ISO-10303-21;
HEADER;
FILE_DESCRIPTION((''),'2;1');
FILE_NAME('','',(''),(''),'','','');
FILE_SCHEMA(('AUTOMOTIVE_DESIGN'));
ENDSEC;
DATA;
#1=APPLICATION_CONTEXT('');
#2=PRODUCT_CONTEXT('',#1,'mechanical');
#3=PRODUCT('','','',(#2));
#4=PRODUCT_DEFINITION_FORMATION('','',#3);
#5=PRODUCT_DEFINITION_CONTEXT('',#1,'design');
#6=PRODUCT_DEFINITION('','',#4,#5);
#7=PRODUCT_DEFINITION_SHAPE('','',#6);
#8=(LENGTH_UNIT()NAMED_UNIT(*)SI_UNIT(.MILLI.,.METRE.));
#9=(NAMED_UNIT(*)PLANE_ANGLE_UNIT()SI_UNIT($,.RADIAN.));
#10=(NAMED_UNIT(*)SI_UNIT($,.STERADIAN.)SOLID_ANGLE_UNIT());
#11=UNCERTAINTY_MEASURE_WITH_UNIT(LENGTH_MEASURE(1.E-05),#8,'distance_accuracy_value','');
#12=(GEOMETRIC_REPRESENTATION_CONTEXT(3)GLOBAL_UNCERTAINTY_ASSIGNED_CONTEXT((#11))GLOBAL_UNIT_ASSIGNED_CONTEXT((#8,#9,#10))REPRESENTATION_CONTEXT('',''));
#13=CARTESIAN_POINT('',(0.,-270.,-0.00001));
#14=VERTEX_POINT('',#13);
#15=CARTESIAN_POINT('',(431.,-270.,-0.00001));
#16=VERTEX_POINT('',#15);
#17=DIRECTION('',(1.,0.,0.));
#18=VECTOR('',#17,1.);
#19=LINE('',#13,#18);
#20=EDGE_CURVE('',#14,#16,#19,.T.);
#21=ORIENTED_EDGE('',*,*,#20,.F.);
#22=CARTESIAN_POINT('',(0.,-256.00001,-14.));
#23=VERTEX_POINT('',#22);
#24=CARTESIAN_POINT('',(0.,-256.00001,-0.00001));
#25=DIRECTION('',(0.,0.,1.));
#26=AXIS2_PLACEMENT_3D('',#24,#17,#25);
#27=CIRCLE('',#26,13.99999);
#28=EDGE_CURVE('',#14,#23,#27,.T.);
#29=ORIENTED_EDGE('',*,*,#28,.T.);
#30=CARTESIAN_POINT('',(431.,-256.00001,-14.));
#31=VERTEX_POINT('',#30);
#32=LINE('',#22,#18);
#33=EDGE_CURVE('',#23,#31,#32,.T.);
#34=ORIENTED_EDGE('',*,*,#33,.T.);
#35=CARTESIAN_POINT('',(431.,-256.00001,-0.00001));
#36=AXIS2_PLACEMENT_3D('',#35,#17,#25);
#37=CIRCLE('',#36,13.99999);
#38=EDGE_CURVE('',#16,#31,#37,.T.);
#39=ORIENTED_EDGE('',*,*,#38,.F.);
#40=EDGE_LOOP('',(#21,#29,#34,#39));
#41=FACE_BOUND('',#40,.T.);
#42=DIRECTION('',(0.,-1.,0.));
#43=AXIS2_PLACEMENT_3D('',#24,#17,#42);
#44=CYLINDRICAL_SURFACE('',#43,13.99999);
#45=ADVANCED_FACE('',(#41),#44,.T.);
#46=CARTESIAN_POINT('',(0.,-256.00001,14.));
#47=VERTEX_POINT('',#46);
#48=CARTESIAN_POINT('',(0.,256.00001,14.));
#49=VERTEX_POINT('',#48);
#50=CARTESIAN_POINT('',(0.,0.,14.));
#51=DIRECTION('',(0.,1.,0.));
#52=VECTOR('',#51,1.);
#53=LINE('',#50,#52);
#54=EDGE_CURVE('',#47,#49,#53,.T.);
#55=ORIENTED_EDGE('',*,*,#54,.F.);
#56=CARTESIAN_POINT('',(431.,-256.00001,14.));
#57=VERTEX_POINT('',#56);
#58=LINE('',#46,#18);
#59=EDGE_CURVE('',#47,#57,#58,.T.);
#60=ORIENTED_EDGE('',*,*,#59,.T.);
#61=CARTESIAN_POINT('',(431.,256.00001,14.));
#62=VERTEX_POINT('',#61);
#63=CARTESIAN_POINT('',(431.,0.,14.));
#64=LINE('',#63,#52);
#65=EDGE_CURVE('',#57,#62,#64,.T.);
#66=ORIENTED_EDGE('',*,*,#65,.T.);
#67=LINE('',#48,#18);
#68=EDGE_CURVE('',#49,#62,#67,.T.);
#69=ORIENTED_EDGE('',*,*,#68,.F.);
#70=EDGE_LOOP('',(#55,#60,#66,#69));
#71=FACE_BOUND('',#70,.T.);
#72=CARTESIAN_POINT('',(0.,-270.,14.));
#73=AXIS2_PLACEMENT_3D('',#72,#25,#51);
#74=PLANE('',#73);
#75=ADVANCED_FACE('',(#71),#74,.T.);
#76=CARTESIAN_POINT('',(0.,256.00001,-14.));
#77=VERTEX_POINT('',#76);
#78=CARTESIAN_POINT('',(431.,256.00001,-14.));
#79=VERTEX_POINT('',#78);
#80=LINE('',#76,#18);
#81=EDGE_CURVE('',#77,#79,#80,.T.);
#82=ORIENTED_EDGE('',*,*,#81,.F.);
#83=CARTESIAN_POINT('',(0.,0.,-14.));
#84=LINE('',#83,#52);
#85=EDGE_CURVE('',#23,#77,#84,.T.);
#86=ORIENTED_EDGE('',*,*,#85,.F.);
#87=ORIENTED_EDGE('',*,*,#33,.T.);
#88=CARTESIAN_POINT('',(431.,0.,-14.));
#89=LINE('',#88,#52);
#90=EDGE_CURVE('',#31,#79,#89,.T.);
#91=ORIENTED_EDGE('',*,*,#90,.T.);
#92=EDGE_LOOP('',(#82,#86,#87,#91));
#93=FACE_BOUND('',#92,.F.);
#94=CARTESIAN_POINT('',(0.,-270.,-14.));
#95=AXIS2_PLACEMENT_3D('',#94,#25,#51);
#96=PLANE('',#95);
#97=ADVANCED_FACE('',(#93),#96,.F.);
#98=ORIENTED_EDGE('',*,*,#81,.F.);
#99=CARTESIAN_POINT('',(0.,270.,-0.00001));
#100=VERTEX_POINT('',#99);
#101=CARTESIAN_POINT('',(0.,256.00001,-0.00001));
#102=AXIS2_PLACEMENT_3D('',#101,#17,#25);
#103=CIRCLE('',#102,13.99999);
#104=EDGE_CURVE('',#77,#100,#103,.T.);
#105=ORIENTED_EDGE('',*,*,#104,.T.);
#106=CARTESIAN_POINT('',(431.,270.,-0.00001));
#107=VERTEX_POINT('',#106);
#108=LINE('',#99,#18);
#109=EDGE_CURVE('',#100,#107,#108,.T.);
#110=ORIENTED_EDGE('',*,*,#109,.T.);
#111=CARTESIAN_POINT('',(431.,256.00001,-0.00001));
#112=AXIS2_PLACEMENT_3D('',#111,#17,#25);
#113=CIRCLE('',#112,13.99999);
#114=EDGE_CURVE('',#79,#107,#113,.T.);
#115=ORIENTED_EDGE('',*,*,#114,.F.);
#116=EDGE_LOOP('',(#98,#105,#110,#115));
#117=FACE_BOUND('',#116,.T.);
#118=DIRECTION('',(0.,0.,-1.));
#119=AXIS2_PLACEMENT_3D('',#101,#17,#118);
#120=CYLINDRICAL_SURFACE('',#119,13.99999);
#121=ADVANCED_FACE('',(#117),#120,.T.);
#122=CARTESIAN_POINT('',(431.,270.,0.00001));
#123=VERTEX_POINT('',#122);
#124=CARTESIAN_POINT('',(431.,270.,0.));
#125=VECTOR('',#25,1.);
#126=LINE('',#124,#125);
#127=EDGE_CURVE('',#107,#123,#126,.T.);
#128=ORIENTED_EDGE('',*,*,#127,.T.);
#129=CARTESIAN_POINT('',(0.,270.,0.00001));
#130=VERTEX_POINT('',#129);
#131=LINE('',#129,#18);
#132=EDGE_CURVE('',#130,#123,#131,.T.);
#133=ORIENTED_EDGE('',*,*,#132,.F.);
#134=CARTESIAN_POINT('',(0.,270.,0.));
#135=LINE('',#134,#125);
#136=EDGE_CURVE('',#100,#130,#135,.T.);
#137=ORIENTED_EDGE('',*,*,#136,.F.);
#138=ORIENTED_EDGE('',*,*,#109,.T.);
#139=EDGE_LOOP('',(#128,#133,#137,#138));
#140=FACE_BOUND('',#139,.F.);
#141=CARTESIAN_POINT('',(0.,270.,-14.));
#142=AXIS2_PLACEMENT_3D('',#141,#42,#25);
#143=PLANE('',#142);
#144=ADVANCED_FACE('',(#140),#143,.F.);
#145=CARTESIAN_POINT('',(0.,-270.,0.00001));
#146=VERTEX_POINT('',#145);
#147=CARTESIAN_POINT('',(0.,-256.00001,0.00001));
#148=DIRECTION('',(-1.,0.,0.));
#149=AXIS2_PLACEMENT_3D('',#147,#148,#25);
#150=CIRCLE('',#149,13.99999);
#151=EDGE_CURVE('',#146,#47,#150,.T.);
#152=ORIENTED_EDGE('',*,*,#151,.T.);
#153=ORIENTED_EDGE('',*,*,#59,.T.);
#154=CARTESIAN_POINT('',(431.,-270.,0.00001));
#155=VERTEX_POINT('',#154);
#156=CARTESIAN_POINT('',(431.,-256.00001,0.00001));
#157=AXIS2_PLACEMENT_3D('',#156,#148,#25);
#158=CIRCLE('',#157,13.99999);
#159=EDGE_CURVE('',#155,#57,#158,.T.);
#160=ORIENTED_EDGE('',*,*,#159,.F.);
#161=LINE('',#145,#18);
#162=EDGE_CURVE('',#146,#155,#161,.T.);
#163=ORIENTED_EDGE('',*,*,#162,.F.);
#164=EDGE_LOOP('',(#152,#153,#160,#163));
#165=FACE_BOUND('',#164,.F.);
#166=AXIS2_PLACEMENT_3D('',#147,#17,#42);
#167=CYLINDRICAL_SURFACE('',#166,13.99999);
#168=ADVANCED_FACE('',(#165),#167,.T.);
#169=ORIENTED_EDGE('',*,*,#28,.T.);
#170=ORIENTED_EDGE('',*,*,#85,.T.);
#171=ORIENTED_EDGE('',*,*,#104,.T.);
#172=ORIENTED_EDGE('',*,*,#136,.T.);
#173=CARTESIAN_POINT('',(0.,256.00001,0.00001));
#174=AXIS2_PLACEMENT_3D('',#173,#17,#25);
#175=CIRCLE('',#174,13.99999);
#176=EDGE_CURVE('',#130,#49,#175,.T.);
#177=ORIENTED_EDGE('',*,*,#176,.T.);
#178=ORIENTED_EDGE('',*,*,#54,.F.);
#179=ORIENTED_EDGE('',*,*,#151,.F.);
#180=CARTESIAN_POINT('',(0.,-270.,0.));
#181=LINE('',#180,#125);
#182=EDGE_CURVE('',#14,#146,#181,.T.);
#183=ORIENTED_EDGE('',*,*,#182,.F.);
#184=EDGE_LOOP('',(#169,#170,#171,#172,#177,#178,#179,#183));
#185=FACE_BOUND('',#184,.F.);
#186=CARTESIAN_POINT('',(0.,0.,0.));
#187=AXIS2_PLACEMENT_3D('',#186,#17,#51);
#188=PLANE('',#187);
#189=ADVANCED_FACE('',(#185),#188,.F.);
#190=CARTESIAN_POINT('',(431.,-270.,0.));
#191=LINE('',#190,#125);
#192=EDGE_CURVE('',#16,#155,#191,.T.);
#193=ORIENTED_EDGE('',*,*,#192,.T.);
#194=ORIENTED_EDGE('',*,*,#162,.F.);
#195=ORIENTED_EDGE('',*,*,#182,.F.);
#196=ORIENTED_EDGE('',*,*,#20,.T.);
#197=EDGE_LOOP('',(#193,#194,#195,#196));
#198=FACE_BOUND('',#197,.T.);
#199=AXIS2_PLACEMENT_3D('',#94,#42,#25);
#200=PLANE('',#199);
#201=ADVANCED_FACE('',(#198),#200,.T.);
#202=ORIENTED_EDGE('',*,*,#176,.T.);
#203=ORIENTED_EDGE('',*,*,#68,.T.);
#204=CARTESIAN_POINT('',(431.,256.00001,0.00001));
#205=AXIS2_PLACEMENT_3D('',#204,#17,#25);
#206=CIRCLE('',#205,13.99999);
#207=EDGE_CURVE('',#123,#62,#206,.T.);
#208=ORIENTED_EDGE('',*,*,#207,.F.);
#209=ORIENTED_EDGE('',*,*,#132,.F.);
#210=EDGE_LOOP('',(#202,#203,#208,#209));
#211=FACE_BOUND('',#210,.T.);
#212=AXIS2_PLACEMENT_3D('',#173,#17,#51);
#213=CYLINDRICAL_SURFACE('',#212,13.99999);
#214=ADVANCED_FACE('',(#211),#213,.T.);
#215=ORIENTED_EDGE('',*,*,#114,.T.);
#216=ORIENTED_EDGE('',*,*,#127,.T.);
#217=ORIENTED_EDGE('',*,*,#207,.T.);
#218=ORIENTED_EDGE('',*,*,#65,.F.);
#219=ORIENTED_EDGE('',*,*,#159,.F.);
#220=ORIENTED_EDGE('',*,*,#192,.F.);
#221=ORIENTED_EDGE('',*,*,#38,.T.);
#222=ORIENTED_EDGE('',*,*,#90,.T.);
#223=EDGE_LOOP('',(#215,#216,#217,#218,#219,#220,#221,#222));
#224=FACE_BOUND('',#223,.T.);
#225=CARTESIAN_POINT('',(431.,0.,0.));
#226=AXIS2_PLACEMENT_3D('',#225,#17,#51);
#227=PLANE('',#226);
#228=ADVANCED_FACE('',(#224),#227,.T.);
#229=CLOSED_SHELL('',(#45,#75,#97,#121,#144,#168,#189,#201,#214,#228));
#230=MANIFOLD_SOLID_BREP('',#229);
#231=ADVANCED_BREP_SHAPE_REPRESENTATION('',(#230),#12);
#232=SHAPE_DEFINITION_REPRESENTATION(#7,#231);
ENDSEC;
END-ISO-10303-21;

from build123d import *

# Parameters (mm, degrees)
F0_W     = 540
F0_H     = 28
F1_DEPTH = 431
F2_R     = 13.99999


# Not quite as in the source:
# - a fillet or chamfer is up to 0.001 mm smaller than in the source, because OpenCascade refuses the exact size


with BuildPart() as f1:
    # F0 (on Right) → F1 (new body)
    with BuildSketch(Plane.YZ):
        Rectangle(F0_W, F0_H)
    extrude(amount=F1_DEPTH)

    # F2 (radius 14 in the source; OpenCascade refuses exactly that, so slightly less here)
    f2_edges = [f1.edges().sort_by_distance(p)[0] for p in [
        (215.5, 270, 14),
        (215.5, 270, -14),
        (215.5, -270, 14),
        (215.5, -270, -14),
    ]]
    fillet(f2_edges, radius=F2_R)


solid = f1.part
